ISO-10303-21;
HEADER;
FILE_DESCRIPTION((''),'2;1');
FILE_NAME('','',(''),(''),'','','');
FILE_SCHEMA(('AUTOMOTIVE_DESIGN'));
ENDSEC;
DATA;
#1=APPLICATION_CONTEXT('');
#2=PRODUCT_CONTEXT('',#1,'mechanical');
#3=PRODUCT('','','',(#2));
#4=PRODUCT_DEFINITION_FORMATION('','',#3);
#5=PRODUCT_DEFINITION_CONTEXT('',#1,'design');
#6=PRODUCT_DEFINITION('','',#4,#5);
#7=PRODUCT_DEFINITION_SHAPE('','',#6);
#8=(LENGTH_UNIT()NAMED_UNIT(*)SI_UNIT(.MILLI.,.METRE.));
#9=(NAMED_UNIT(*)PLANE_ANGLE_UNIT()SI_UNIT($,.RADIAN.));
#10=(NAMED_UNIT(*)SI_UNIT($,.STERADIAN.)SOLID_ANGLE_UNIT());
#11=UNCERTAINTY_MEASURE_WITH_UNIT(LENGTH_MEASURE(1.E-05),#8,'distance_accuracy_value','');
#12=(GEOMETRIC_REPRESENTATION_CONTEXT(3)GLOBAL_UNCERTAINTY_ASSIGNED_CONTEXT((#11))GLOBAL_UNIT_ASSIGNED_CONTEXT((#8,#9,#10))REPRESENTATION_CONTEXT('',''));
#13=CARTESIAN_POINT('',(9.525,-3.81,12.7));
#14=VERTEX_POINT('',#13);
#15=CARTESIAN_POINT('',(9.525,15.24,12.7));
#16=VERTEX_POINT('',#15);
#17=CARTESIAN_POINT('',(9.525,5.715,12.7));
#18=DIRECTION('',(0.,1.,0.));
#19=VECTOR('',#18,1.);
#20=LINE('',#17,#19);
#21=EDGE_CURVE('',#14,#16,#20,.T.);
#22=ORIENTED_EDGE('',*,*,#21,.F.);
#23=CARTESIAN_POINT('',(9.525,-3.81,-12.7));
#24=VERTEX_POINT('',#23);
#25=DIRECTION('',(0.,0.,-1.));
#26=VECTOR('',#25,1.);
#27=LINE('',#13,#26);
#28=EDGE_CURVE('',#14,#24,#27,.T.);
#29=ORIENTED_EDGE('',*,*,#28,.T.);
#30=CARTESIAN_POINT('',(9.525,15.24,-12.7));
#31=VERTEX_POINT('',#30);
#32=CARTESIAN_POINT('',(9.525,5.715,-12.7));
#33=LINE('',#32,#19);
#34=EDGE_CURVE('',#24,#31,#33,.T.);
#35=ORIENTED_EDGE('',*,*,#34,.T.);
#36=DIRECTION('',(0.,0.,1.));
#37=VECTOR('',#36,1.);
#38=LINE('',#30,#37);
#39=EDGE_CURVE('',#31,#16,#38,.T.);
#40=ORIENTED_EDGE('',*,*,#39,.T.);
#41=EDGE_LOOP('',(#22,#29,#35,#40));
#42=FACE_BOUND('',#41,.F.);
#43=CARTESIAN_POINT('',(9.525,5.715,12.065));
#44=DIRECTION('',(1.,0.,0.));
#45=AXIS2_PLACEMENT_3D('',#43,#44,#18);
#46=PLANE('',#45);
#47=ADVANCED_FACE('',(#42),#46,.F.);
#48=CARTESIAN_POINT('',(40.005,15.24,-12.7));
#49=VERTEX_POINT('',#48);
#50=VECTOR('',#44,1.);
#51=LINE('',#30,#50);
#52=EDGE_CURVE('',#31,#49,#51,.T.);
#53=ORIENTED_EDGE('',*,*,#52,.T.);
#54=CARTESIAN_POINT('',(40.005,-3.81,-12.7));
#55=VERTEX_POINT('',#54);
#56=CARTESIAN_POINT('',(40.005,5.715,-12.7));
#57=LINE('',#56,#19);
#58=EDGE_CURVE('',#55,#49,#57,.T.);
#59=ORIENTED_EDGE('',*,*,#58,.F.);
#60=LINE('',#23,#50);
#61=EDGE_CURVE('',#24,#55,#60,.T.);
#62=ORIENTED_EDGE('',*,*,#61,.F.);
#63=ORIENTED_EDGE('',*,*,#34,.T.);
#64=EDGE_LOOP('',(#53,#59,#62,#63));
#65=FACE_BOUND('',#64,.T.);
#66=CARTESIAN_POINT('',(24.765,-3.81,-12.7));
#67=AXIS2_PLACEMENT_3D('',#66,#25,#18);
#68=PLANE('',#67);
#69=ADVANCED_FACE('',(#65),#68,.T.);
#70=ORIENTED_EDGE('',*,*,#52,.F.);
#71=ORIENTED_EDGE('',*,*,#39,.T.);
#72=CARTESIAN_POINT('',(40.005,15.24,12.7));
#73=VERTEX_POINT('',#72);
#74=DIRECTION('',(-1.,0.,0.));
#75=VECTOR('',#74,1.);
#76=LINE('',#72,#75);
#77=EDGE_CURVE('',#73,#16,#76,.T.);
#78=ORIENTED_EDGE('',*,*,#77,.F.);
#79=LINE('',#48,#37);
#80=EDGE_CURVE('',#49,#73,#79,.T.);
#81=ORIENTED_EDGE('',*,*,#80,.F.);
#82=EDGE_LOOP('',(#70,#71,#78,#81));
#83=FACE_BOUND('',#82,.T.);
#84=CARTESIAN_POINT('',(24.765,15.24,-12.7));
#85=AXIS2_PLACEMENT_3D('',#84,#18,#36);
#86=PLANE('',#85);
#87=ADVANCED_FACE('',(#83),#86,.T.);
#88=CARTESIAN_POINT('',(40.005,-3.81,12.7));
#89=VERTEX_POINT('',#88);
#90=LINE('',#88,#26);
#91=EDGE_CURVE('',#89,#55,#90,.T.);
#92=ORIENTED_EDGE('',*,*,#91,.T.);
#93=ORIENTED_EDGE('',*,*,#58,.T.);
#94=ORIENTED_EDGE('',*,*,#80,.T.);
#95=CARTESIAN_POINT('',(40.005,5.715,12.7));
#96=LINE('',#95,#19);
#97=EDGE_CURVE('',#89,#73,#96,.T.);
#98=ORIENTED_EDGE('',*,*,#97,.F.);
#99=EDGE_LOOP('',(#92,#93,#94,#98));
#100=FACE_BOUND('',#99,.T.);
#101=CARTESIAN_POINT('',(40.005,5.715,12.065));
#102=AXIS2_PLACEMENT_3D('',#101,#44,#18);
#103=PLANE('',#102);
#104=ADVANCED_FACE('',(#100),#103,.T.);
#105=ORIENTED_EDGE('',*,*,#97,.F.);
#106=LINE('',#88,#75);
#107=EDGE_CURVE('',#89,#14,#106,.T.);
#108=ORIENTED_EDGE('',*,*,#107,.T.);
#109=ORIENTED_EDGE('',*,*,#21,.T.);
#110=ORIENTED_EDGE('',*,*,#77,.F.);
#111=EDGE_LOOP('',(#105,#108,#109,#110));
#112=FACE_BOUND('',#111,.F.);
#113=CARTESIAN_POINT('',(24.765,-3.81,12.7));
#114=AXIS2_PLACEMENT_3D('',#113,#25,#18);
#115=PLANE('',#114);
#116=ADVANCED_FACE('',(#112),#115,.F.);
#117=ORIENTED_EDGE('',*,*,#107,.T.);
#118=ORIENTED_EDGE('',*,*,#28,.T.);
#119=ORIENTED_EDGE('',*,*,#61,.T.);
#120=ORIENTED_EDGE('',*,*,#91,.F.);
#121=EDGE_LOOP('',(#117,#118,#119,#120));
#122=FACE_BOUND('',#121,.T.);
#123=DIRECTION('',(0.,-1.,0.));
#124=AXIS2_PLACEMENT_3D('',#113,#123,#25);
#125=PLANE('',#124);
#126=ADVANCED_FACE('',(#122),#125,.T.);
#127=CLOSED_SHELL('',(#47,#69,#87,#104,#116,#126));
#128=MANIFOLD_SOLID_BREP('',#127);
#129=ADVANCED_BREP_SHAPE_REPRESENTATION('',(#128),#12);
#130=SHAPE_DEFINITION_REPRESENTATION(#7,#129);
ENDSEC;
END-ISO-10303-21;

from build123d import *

# Parameters (mm, degrees)
F0_W     = 19.05
F0_H     = 1.27
F3_DEPTH = 15.24
F4_ANGLE = 90


# Not quite as in the source:
# - a feature names something its author has since deleted; it is built from what else it names
# - the program builds the solid bodies; features that only make, move or delete a surface that nothing else refers to are left out


with BuildPart() as f3:
    # F0 (on Front) → F3 (new body, symmetric)
    with BuildSketch(Plane.XZ):
        with Locations((0, 12.065)):
            Rectangle(F0_W, F0_H)
        with Locations((0, 10.795)):
            Rectangle(F0_W, F0_H)
        with Locations((0, 9.525)):
            Rectangle(F0_W, F0_H)
        with Locations((0, 8.255)):
            Rectangle(F0_W, F0_H)
        with Locations((0, 6.985)):
            Rectangle(F0_W, F0_H)
        with Locations((0, 5.715)):
            Rectangle(F0_W, F0_H)
        with Locations((0, 4.445)):
            Rectangle(F0_W, F0_H)
        with Locations((0, 3.175)):
            Rectangle(F0_W, F0_H)
        with Locations((0, 1.905)):
            Rectangle(F0_W, F0_H)
        with Locations((0, 0.635)):
            Rectangle(F0_W, F0_H)
        with Locations((0, -0.635)):
            Rectangle(F0_W, F0_H)
        with Locations((0, -1.905)):
            Rectangle(F0_W, F0_H)
        with Locations((0, -3.175)):
            Rectangle(F0_W, F0_H)
        with Locations((0, -4.445)):
            Rectangle(F0_W, F0_H)
        with Locations((0, -5.715)):
            Rectangle(F0_W, F0_H)
        with Locations((0, -6.985)):
            Rectangle(F0_W, F0_H)
        with Locations((0, -8.255)):
            Rectangle(F0_W, F0_H)
        with Locations((0, -9.525)):
            Rectangle(F0_W, F0_H)
        with Locations((0, -10.795)):
            Rectangle(F0_W, F0_H)
        with Locations((0, -12.065)):
            Rectangle(F0_W, F0_H)
    extrude(amount=F3_DEPTH, both=True)


with BuildPart() as f3_1:
    # F4: moved
    add(f3.part.rotate(Axis((9.525, 15.24, 0), (0, 0, 1)), F4_ANGLE))


solid = f3_1.part
